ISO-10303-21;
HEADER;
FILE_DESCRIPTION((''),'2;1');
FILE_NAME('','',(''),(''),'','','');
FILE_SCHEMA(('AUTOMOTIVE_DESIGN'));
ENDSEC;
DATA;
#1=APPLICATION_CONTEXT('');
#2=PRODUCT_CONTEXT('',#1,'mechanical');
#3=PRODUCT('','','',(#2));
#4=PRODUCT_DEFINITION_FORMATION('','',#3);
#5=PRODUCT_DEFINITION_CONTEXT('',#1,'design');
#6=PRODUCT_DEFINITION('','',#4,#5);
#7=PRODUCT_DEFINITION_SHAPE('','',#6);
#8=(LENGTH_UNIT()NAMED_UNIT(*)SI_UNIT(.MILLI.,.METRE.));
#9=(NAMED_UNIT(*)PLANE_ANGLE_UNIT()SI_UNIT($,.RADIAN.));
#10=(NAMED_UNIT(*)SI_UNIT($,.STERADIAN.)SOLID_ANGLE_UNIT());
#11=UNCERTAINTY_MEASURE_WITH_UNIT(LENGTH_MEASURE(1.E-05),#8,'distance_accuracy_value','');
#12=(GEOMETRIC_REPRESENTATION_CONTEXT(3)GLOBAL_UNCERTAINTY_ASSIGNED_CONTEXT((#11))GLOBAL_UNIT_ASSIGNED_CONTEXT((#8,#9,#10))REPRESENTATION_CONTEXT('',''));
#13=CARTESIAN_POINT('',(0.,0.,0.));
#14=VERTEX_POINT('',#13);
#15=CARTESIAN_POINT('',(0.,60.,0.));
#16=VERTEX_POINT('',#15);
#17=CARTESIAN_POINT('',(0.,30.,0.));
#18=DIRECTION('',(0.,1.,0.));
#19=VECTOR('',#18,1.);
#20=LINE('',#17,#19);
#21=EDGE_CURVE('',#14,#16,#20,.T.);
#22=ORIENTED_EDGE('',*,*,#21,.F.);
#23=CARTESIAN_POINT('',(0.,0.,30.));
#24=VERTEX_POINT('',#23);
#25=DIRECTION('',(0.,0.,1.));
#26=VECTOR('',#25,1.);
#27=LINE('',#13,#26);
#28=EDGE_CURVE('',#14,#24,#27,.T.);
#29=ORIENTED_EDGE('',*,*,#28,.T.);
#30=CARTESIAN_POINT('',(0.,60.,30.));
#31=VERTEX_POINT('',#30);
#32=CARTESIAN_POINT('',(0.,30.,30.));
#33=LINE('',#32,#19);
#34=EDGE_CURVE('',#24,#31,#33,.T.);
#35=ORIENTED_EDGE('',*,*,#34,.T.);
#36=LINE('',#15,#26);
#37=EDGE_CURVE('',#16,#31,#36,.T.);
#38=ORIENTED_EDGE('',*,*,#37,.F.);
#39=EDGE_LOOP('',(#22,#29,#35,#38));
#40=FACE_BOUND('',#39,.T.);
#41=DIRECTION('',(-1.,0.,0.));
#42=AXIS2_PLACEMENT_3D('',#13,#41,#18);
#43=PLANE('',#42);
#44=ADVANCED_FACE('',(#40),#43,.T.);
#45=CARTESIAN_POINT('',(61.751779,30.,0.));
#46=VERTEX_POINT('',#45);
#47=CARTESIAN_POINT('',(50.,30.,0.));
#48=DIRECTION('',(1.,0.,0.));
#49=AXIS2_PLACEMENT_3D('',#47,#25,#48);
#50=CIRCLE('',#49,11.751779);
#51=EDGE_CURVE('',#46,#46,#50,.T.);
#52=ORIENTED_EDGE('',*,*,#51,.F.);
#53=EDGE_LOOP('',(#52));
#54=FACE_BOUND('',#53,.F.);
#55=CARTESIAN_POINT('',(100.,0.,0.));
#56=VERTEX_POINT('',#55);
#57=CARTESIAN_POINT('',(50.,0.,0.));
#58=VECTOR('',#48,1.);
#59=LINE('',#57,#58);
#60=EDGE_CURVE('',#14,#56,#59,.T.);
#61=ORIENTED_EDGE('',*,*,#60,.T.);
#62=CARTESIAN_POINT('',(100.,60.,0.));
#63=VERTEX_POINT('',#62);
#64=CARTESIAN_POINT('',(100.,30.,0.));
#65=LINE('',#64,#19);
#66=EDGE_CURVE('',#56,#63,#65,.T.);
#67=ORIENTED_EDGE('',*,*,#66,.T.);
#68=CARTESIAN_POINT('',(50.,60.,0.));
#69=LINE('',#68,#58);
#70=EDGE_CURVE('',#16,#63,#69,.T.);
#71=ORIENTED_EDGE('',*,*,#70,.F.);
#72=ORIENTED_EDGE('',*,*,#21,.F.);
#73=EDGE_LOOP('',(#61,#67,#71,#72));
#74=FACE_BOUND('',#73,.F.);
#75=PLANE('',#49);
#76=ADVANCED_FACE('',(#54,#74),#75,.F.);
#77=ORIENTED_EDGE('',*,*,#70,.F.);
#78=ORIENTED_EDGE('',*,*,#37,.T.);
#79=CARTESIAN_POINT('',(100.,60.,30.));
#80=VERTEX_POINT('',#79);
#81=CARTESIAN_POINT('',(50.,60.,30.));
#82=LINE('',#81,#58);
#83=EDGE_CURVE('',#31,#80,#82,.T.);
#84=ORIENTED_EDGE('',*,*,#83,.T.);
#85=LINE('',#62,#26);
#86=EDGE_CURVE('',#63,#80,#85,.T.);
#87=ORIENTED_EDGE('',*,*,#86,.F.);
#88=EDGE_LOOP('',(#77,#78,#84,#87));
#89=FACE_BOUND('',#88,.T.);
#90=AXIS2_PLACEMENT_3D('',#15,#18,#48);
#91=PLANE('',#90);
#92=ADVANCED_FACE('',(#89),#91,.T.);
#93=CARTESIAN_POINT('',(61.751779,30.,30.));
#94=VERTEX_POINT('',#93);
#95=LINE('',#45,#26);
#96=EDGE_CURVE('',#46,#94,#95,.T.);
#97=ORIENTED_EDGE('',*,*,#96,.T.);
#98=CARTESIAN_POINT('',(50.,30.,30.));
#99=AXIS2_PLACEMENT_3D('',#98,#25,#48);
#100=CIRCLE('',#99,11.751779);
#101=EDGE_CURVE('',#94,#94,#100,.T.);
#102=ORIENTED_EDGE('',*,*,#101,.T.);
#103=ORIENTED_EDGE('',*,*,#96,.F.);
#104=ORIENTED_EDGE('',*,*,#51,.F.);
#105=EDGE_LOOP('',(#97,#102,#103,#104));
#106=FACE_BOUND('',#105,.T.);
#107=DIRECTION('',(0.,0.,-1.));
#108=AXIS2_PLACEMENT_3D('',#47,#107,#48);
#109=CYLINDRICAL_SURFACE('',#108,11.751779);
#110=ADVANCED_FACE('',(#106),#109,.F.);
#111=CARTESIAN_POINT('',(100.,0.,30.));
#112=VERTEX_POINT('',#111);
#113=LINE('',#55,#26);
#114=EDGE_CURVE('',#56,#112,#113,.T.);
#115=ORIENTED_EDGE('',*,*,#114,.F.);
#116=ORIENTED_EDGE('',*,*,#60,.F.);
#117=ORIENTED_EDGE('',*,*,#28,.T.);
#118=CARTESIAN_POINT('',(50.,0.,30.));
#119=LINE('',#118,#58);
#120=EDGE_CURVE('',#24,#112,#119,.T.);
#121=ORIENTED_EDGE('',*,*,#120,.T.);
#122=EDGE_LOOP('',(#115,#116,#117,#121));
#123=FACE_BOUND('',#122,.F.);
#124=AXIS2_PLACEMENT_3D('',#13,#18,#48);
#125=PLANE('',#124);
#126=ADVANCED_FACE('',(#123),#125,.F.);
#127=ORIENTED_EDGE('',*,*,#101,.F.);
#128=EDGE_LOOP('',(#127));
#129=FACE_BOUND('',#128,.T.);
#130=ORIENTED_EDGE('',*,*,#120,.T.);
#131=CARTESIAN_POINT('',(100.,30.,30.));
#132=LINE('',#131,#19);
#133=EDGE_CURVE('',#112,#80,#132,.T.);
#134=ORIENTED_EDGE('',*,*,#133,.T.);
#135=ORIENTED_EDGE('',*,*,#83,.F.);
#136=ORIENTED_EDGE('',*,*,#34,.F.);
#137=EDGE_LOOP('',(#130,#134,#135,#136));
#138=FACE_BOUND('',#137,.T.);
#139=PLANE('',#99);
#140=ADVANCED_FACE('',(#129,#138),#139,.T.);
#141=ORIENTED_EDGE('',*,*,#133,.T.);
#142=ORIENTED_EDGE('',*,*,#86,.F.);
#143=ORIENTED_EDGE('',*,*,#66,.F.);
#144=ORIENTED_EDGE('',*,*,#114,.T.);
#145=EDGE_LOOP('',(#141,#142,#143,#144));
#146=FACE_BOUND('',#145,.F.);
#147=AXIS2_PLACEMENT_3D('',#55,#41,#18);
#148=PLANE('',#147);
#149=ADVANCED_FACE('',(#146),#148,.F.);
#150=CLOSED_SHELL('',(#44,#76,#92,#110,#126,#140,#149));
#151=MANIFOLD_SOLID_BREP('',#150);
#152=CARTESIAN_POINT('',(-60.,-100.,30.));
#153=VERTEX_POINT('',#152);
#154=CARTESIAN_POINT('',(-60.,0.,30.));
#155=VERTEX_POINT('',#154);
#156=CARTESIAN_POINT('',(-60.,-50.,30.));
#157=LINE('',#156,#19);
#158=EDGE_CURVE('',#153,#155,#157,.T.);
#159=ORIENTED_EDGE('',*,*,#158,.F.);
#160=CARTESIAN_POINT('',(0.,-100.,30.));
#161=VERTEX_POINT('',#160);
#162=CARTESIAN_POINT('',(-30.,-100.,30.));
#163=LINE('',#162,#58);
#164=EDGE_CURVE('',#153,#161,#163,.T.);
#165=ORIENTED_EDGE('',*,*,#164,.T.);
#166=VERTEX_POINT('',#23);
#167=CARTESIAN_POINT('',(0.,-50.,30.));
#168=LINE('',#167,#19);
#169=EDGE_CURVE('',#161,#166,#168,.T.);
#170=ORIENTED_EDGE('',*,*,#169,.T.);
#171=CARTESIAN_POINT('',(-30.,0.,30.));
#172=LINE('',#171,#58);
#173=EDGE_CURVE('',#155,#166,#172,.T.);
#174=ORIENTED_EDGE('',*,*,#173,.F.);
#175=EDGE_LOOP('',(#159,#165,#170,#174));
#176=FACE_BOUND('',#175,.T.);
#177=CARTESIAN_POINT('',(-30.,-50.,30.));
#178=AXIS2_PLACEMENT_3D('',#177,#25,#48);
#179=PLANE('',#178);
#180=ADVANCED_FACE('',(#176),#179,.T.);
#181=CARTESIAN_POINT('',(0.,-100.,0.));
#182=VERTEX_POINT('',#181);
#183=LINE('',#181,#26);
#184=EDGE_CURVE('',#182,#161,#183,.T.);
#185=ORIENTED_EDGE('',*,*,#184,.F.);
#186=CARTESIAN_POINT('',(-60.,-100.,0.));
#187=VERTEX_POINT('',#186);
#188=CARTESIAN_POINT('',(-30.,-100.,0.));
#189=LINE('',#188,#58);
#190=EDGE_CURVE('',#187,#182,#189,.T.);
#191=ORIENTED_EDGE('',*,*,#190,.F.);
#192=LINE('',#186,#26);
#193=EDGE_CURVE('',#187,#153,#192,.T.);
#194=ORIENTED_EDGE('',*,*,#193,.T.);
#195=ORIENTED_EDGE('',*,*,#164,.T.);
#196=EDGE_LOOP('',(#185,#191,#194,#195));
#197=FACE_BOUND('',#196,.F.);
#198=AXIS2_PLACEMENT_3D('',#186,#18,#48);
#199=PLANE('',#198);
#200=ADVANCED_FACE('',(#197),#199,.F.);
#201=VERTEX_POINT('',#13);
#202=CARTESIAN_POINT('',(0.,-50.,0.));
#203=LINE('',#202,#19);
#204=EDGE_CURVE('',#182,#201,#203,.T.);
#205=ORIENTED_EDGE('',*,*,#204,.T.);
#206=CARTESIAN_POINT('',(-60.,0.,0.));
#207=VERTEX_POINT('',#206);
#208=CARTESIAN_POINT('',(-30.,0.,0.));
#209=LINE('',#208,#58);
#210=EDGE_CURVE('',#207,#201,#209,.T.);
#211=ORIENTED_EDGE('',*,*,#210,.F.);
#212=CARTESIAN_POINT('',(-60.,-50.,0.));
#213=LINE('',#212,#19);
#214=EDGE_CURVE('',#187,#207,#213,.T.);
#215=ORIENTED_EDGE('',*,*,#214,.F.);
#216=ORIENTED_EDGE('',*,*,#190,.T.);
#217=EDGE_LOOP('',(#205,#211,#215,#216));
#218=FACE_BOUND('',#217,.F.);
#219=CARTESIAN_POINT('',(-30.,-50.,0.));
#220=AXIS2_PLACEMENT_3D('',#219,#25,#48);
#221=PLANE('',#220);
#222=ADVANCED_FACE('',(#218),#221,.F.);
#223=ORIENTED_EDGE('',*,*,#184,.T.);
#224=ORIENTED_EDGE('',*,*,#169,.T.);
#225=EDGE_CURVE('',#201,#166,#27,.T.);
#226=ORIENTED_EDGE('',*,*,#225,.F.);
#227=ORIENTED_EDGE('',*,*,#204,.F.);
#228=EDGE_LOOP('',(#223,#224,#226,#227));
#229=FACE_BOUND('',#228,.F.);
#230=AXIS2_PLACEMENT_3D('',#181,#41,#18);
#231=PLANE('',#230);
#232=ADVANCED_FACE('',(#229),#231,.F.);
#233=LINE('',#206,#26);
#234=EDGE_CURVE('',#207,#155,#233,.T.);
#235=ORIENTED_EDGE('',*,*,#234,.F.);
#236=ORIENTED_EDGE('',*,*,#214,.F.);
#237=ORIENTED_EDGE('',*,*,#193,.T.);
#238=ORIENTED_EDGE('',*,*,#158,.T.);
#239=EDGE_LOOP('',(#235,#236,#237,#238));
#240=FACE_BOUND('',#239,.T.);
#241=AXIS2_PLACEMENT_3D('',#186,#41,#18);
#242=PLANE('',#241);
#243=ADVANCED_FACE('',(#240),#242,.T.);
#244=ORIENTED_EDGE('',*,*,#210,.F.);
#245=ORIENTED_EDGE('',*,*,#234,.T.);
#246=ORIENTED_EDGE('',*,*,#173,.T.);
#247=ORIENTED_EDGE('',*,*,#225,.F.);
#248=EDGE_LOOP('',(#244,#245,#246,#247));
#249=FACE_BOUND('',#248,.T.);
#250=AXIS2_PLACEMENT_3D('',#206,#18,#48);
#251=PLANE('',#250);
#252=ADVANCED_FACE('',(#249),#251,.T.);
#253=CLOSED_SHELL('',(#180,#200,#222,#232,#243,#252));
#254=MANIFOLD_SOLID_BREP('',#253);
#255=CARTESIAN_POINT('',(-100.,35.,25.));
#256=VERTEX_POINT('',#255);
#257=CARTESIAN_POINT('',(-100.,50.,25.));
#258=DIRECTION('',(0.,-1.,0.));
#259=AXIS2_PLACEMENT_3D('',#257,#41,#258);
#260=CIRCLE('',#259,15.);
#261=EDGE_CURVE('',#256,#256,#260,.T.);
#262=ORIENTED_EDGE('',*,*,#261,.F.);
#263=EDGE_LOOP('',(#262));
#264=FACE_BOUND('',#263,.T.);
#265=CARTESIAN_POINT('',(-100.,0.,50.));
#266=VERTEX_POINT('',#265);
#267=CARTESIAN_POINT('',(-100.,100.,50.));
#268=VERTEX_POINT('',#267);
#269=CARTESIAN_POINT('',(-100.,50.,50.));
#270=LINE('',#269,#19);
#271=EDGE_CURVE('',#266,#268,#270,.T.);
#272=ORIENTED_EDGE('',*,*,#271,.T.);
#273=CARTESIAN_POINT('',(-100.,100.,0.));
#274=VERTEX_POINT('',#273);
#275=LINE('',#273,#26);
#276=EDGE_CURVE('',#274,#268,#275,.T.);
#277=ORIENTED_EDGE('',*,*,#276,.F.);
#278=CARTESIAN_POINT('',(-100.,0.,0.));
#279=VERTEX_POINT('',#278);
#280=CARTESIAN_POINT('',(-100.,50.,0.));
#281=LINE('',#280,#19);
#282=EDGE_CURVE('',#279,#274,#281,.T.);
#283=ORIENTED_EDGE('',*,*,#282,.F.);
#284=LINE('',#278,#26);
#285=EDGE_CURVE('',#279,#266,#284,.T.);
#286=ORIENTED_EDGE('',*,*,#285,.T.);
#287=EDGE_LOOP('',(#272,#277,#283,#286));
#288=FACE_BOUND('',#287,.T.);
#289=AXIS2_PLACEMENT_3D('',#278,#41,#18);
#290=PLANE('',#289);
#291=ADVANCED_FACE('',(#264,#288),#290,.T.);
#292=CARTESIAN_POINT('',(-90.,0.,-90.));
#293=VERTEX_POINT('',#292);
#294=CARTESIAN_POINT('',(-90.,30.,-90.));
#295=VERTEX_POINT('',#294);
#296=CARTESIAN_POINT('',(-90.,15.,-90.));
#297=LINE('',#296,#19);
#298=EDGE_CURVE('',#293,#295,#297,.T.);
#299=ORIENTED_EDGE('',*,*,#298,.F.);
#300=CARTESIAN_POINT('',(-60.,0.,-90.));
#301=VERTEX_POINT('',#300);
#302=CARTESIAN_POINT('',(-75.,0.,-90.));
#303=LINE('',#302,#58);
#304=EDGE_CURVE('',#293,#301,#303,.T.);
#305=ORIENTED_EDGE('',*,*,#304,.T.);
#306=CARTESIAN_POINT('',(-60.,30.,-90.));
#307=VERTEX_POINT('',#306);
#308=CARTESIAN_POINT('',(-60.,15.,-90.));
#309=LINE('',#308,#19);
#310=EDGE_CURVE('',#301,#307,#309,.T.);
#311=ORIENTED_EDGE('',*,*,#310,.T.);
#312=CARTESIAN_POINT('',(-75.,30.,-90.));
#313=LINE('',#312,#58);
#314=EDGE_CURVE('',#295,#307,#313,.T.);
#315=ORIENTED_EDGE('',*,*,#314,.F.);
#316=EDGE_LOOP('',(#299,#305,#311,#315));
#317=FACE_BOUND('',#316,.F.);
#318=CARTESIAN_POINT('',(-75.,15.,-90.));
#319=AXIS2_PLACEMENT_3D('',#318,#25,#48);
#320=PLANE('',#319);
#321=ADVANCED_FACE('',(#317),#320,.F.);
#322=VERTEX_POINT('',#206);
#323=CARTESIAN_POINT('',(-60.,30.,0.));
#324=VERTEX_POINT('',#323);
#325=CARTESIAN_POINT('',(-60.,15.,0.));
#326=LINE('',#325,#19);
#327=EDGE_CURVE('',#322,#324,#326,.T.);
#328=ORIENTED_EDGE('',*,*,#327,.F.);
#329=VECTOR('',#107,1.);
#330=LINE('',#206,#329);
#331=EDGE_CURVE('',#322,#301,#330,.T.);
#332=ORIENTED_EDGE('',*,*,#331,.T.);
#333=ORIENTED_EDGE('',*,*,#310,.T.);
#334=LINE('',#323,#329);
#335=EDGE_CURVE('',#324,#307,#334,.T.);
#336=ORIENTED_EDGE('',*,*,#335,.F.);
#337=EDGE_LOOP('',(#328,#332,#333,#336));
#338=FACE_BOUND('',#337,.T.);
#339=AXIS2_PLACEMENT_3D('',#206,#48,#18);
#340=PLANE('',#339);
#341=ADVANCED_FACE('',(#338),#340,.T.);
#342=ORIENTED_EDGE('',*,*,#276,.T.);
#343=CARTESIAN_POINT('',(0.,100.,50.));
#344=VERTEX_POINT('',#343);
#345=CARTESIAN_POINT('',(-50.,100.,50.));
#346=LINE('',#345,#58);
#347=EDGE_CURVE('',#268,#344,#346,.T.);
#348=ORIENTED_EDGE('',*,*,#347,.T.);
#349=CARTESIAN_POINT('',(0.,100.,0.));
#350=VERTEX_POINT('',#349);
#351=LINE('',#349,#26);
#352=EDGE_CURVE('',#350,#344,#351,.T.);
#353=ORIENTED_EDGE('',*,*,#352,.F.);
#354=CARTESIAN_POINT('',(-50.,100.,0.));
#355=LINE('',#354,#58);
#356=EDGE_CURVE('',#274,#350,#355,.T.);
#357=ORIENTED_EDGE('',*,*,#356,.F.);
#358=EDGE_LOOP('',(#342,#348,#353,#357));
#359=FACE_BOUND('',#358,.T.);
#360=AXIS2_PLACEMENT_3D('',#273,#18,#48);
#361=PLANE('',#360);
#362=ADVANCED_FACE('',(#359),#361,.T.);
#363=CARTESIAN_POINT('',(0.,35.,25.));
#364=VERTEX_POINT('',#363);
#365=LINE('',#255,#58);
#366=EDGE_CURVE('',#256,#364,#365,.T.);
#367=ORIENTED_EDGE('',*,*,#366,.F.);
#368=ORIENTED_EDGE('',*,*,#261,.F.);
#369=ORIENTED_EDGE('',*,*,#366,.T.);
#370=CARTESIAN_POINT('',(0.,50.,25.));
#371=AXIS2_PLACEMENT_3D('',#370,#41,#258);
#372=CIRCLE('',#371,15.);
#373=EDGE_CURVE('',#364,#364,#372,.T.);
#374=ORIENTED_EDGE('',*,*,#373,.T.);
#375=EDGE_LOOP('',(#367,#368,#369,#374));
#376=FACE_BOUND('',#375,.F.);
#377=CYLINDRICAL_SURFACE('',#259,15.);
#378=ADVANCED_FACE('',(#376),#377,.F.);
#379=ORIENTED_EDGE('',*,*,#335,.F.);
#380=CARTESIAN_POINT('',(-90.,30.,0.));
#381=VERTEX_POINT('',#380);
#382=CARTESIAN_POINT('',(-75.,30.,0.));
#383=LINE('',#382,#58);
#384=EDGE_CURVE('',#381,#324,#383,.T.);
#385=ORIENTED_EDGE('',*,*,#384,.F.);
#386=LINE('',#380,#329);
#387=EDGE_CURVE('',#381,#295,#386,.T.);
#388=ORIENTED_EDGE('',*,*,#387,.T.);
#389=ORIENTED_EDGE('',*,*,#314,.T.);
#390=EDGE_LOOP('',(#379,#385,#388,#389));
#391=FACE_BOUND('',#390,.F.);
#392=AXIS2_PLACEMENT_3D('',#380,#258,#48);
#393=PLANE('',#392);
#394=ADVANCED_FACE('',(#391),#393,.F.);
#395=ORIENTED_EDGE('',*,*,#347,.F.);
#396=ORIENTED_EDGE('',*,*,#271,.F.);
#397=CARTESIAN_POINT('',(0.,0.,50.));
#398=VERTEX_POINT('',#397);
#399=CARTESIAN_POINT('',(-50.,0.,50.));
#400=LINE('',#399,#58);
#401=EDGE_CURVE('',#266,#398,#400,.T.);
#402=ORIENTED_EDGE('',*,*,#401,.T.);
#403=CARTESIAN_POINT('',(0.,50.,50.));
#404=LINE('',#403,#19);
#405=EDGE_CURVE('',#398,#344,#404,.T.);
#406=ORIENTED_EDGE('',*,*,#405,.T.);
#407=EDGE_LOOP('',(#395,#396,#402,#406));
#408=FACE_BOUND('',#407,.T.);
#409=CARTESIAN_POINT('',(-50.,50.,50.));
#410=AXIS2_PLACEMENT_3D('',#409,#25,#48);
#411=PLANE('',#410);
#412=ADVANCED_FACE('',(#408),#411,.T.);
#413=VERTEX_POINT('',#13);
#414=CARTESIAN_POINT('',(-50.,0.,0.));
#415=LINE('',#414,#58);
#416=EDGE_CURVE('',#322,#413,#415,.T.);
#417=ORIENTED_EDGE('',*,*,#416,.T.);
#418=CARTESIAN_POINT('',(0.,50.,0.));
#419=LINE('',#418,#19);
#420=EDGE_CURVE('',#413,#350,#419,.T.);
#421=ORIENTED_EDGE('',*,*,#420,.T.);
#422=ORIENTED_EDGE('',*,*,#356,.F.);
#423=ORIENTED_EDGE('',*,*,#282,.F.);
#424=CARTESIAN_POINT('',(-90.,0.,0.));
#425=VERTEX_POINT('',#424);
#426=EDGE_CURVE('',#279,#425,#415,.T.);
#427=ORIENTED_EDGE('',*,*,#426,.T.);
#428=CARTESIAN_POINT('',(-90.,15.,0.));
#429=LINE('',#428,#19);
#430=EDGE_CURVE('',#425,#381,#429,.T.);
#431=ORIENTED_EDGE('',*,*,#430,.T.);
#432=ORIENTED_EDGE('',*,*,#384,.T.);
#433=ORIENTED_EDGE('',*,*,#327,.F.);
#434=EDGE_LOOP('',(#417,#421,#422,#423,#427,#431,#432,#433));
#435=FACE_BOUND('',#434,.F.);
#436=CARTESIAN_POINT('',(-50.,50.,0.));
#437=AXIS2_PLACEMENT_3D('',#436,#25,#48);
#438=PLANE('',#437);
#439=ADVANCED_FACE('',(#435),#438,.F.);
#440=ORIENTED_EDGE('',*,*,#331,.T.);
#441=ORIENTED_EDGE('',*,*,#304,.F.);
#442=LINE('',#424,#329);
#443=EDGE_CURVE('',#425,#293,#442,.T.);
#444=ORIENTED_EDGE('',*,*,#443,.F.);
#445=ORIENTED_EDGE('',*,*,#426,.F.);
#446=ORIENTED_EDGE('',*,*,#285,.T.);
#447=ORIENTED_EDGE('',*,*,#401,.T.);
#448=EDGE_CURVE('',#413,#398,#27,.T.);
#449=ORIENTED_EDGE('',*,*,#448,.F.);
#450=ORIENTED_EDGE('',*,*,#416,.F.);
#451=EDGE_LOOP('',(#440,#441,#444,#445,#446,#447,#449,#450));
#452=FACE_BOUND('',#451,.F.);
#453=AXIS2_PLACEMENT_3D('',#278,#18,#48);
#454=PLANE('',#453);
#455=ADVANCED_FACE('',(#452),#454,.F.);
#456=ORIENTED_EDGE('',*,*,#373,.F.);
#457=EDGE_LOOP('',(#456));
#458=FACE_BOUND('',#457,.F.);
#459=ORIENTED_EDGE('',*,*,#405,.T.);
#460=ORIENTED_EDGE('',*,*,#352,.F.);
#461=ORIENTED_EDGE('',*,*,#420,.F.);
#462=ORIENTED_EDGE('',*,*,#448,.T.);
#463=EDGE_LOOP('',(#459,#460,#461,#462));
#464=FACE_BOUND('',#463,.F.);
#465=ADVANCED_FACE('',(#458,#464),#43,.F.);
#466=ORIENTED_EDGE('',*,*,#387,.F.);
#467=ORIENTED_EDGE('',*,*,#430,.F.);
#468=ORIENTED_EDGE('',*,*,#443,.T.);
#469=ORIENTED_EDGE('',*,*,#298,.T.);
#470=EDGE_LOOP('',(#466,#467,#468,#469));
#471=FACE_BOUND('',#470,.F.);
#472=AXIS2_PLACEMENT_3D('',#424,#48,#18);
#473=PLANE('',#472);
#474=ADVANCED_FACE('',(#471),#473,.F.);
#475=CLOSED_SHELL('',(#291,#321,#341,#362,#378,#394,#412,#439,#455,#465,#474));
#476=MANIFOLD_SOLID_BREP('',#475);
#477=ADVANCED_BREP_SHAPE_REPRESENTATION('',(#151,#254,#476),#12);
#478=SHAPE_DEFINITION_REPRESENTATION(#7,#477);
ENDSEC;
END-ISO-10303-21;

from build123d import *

# Parameters (mm, degrees)
F0_W     = 100
F0_H     = 60
F0_R     = 11.7517787986
F1_DEPTH = 30
F2_W     = 60
F2_H     = 100
F3_DEPTH = 30
F4_W     = 100
F4_H     = 100
F5_DEPTH = 50
F6_R     = 15
F7_DEPTH = 100
F2_W_2   = 30
F2_H_2   = 30
F8_DEPTH = 90


with BuildPart() as f1:
    # F0 (on Top) → F1 (new body)
    with BuildSketch(Plane.XY):
        with Locations((50, 30)):
            Rectangle(F0_W, F0_H)
        with Locations((50, 30)):
            Circle(F0_R, mode=Mode.SUBTRACT)
    extrude(amount=F1_DEPTH)


with BuildPart() as f3:
    # F2 (on Top) → F3 (new body)
    with BuildSketch(Plane.XY):
        with Locations((-30, -50)):
            Rectangle(F2_W, F2_H)
    extrude(amount=F3_DEPTH)


with BuildPart() as f5:
    # F4 (on Top) → F5 (new body)
    with BuildSketch(Plane.XY):
        with Locations((-50, 50)):
            Rectangle(F4_W, F4_H)
    extrude(amount=F5_DEPTH)

    # F6 (on face) → F7 (cut, through all)
    with BuildSketch(Plane(origin=(-100, 0, 0), x_dir=(0, -1, 0), z_dir=(-1, 0, 0))):
        with Locations((-50, 25)):
            Circle(F6_R)
    extrude(amount=-F7_DEPTH, mode=Mode.SUBTRACT)

    # F2 (on Top) → F8 (join)
    with BuildSketch(Plane.XY):
        with Locations((-75, 15)):
            Rectangle(F2_W_2, F2_H_2)
    extrude(amount=-F8_DEPTH)


solid = Compound([f1.part, f3.part, f5.part])
